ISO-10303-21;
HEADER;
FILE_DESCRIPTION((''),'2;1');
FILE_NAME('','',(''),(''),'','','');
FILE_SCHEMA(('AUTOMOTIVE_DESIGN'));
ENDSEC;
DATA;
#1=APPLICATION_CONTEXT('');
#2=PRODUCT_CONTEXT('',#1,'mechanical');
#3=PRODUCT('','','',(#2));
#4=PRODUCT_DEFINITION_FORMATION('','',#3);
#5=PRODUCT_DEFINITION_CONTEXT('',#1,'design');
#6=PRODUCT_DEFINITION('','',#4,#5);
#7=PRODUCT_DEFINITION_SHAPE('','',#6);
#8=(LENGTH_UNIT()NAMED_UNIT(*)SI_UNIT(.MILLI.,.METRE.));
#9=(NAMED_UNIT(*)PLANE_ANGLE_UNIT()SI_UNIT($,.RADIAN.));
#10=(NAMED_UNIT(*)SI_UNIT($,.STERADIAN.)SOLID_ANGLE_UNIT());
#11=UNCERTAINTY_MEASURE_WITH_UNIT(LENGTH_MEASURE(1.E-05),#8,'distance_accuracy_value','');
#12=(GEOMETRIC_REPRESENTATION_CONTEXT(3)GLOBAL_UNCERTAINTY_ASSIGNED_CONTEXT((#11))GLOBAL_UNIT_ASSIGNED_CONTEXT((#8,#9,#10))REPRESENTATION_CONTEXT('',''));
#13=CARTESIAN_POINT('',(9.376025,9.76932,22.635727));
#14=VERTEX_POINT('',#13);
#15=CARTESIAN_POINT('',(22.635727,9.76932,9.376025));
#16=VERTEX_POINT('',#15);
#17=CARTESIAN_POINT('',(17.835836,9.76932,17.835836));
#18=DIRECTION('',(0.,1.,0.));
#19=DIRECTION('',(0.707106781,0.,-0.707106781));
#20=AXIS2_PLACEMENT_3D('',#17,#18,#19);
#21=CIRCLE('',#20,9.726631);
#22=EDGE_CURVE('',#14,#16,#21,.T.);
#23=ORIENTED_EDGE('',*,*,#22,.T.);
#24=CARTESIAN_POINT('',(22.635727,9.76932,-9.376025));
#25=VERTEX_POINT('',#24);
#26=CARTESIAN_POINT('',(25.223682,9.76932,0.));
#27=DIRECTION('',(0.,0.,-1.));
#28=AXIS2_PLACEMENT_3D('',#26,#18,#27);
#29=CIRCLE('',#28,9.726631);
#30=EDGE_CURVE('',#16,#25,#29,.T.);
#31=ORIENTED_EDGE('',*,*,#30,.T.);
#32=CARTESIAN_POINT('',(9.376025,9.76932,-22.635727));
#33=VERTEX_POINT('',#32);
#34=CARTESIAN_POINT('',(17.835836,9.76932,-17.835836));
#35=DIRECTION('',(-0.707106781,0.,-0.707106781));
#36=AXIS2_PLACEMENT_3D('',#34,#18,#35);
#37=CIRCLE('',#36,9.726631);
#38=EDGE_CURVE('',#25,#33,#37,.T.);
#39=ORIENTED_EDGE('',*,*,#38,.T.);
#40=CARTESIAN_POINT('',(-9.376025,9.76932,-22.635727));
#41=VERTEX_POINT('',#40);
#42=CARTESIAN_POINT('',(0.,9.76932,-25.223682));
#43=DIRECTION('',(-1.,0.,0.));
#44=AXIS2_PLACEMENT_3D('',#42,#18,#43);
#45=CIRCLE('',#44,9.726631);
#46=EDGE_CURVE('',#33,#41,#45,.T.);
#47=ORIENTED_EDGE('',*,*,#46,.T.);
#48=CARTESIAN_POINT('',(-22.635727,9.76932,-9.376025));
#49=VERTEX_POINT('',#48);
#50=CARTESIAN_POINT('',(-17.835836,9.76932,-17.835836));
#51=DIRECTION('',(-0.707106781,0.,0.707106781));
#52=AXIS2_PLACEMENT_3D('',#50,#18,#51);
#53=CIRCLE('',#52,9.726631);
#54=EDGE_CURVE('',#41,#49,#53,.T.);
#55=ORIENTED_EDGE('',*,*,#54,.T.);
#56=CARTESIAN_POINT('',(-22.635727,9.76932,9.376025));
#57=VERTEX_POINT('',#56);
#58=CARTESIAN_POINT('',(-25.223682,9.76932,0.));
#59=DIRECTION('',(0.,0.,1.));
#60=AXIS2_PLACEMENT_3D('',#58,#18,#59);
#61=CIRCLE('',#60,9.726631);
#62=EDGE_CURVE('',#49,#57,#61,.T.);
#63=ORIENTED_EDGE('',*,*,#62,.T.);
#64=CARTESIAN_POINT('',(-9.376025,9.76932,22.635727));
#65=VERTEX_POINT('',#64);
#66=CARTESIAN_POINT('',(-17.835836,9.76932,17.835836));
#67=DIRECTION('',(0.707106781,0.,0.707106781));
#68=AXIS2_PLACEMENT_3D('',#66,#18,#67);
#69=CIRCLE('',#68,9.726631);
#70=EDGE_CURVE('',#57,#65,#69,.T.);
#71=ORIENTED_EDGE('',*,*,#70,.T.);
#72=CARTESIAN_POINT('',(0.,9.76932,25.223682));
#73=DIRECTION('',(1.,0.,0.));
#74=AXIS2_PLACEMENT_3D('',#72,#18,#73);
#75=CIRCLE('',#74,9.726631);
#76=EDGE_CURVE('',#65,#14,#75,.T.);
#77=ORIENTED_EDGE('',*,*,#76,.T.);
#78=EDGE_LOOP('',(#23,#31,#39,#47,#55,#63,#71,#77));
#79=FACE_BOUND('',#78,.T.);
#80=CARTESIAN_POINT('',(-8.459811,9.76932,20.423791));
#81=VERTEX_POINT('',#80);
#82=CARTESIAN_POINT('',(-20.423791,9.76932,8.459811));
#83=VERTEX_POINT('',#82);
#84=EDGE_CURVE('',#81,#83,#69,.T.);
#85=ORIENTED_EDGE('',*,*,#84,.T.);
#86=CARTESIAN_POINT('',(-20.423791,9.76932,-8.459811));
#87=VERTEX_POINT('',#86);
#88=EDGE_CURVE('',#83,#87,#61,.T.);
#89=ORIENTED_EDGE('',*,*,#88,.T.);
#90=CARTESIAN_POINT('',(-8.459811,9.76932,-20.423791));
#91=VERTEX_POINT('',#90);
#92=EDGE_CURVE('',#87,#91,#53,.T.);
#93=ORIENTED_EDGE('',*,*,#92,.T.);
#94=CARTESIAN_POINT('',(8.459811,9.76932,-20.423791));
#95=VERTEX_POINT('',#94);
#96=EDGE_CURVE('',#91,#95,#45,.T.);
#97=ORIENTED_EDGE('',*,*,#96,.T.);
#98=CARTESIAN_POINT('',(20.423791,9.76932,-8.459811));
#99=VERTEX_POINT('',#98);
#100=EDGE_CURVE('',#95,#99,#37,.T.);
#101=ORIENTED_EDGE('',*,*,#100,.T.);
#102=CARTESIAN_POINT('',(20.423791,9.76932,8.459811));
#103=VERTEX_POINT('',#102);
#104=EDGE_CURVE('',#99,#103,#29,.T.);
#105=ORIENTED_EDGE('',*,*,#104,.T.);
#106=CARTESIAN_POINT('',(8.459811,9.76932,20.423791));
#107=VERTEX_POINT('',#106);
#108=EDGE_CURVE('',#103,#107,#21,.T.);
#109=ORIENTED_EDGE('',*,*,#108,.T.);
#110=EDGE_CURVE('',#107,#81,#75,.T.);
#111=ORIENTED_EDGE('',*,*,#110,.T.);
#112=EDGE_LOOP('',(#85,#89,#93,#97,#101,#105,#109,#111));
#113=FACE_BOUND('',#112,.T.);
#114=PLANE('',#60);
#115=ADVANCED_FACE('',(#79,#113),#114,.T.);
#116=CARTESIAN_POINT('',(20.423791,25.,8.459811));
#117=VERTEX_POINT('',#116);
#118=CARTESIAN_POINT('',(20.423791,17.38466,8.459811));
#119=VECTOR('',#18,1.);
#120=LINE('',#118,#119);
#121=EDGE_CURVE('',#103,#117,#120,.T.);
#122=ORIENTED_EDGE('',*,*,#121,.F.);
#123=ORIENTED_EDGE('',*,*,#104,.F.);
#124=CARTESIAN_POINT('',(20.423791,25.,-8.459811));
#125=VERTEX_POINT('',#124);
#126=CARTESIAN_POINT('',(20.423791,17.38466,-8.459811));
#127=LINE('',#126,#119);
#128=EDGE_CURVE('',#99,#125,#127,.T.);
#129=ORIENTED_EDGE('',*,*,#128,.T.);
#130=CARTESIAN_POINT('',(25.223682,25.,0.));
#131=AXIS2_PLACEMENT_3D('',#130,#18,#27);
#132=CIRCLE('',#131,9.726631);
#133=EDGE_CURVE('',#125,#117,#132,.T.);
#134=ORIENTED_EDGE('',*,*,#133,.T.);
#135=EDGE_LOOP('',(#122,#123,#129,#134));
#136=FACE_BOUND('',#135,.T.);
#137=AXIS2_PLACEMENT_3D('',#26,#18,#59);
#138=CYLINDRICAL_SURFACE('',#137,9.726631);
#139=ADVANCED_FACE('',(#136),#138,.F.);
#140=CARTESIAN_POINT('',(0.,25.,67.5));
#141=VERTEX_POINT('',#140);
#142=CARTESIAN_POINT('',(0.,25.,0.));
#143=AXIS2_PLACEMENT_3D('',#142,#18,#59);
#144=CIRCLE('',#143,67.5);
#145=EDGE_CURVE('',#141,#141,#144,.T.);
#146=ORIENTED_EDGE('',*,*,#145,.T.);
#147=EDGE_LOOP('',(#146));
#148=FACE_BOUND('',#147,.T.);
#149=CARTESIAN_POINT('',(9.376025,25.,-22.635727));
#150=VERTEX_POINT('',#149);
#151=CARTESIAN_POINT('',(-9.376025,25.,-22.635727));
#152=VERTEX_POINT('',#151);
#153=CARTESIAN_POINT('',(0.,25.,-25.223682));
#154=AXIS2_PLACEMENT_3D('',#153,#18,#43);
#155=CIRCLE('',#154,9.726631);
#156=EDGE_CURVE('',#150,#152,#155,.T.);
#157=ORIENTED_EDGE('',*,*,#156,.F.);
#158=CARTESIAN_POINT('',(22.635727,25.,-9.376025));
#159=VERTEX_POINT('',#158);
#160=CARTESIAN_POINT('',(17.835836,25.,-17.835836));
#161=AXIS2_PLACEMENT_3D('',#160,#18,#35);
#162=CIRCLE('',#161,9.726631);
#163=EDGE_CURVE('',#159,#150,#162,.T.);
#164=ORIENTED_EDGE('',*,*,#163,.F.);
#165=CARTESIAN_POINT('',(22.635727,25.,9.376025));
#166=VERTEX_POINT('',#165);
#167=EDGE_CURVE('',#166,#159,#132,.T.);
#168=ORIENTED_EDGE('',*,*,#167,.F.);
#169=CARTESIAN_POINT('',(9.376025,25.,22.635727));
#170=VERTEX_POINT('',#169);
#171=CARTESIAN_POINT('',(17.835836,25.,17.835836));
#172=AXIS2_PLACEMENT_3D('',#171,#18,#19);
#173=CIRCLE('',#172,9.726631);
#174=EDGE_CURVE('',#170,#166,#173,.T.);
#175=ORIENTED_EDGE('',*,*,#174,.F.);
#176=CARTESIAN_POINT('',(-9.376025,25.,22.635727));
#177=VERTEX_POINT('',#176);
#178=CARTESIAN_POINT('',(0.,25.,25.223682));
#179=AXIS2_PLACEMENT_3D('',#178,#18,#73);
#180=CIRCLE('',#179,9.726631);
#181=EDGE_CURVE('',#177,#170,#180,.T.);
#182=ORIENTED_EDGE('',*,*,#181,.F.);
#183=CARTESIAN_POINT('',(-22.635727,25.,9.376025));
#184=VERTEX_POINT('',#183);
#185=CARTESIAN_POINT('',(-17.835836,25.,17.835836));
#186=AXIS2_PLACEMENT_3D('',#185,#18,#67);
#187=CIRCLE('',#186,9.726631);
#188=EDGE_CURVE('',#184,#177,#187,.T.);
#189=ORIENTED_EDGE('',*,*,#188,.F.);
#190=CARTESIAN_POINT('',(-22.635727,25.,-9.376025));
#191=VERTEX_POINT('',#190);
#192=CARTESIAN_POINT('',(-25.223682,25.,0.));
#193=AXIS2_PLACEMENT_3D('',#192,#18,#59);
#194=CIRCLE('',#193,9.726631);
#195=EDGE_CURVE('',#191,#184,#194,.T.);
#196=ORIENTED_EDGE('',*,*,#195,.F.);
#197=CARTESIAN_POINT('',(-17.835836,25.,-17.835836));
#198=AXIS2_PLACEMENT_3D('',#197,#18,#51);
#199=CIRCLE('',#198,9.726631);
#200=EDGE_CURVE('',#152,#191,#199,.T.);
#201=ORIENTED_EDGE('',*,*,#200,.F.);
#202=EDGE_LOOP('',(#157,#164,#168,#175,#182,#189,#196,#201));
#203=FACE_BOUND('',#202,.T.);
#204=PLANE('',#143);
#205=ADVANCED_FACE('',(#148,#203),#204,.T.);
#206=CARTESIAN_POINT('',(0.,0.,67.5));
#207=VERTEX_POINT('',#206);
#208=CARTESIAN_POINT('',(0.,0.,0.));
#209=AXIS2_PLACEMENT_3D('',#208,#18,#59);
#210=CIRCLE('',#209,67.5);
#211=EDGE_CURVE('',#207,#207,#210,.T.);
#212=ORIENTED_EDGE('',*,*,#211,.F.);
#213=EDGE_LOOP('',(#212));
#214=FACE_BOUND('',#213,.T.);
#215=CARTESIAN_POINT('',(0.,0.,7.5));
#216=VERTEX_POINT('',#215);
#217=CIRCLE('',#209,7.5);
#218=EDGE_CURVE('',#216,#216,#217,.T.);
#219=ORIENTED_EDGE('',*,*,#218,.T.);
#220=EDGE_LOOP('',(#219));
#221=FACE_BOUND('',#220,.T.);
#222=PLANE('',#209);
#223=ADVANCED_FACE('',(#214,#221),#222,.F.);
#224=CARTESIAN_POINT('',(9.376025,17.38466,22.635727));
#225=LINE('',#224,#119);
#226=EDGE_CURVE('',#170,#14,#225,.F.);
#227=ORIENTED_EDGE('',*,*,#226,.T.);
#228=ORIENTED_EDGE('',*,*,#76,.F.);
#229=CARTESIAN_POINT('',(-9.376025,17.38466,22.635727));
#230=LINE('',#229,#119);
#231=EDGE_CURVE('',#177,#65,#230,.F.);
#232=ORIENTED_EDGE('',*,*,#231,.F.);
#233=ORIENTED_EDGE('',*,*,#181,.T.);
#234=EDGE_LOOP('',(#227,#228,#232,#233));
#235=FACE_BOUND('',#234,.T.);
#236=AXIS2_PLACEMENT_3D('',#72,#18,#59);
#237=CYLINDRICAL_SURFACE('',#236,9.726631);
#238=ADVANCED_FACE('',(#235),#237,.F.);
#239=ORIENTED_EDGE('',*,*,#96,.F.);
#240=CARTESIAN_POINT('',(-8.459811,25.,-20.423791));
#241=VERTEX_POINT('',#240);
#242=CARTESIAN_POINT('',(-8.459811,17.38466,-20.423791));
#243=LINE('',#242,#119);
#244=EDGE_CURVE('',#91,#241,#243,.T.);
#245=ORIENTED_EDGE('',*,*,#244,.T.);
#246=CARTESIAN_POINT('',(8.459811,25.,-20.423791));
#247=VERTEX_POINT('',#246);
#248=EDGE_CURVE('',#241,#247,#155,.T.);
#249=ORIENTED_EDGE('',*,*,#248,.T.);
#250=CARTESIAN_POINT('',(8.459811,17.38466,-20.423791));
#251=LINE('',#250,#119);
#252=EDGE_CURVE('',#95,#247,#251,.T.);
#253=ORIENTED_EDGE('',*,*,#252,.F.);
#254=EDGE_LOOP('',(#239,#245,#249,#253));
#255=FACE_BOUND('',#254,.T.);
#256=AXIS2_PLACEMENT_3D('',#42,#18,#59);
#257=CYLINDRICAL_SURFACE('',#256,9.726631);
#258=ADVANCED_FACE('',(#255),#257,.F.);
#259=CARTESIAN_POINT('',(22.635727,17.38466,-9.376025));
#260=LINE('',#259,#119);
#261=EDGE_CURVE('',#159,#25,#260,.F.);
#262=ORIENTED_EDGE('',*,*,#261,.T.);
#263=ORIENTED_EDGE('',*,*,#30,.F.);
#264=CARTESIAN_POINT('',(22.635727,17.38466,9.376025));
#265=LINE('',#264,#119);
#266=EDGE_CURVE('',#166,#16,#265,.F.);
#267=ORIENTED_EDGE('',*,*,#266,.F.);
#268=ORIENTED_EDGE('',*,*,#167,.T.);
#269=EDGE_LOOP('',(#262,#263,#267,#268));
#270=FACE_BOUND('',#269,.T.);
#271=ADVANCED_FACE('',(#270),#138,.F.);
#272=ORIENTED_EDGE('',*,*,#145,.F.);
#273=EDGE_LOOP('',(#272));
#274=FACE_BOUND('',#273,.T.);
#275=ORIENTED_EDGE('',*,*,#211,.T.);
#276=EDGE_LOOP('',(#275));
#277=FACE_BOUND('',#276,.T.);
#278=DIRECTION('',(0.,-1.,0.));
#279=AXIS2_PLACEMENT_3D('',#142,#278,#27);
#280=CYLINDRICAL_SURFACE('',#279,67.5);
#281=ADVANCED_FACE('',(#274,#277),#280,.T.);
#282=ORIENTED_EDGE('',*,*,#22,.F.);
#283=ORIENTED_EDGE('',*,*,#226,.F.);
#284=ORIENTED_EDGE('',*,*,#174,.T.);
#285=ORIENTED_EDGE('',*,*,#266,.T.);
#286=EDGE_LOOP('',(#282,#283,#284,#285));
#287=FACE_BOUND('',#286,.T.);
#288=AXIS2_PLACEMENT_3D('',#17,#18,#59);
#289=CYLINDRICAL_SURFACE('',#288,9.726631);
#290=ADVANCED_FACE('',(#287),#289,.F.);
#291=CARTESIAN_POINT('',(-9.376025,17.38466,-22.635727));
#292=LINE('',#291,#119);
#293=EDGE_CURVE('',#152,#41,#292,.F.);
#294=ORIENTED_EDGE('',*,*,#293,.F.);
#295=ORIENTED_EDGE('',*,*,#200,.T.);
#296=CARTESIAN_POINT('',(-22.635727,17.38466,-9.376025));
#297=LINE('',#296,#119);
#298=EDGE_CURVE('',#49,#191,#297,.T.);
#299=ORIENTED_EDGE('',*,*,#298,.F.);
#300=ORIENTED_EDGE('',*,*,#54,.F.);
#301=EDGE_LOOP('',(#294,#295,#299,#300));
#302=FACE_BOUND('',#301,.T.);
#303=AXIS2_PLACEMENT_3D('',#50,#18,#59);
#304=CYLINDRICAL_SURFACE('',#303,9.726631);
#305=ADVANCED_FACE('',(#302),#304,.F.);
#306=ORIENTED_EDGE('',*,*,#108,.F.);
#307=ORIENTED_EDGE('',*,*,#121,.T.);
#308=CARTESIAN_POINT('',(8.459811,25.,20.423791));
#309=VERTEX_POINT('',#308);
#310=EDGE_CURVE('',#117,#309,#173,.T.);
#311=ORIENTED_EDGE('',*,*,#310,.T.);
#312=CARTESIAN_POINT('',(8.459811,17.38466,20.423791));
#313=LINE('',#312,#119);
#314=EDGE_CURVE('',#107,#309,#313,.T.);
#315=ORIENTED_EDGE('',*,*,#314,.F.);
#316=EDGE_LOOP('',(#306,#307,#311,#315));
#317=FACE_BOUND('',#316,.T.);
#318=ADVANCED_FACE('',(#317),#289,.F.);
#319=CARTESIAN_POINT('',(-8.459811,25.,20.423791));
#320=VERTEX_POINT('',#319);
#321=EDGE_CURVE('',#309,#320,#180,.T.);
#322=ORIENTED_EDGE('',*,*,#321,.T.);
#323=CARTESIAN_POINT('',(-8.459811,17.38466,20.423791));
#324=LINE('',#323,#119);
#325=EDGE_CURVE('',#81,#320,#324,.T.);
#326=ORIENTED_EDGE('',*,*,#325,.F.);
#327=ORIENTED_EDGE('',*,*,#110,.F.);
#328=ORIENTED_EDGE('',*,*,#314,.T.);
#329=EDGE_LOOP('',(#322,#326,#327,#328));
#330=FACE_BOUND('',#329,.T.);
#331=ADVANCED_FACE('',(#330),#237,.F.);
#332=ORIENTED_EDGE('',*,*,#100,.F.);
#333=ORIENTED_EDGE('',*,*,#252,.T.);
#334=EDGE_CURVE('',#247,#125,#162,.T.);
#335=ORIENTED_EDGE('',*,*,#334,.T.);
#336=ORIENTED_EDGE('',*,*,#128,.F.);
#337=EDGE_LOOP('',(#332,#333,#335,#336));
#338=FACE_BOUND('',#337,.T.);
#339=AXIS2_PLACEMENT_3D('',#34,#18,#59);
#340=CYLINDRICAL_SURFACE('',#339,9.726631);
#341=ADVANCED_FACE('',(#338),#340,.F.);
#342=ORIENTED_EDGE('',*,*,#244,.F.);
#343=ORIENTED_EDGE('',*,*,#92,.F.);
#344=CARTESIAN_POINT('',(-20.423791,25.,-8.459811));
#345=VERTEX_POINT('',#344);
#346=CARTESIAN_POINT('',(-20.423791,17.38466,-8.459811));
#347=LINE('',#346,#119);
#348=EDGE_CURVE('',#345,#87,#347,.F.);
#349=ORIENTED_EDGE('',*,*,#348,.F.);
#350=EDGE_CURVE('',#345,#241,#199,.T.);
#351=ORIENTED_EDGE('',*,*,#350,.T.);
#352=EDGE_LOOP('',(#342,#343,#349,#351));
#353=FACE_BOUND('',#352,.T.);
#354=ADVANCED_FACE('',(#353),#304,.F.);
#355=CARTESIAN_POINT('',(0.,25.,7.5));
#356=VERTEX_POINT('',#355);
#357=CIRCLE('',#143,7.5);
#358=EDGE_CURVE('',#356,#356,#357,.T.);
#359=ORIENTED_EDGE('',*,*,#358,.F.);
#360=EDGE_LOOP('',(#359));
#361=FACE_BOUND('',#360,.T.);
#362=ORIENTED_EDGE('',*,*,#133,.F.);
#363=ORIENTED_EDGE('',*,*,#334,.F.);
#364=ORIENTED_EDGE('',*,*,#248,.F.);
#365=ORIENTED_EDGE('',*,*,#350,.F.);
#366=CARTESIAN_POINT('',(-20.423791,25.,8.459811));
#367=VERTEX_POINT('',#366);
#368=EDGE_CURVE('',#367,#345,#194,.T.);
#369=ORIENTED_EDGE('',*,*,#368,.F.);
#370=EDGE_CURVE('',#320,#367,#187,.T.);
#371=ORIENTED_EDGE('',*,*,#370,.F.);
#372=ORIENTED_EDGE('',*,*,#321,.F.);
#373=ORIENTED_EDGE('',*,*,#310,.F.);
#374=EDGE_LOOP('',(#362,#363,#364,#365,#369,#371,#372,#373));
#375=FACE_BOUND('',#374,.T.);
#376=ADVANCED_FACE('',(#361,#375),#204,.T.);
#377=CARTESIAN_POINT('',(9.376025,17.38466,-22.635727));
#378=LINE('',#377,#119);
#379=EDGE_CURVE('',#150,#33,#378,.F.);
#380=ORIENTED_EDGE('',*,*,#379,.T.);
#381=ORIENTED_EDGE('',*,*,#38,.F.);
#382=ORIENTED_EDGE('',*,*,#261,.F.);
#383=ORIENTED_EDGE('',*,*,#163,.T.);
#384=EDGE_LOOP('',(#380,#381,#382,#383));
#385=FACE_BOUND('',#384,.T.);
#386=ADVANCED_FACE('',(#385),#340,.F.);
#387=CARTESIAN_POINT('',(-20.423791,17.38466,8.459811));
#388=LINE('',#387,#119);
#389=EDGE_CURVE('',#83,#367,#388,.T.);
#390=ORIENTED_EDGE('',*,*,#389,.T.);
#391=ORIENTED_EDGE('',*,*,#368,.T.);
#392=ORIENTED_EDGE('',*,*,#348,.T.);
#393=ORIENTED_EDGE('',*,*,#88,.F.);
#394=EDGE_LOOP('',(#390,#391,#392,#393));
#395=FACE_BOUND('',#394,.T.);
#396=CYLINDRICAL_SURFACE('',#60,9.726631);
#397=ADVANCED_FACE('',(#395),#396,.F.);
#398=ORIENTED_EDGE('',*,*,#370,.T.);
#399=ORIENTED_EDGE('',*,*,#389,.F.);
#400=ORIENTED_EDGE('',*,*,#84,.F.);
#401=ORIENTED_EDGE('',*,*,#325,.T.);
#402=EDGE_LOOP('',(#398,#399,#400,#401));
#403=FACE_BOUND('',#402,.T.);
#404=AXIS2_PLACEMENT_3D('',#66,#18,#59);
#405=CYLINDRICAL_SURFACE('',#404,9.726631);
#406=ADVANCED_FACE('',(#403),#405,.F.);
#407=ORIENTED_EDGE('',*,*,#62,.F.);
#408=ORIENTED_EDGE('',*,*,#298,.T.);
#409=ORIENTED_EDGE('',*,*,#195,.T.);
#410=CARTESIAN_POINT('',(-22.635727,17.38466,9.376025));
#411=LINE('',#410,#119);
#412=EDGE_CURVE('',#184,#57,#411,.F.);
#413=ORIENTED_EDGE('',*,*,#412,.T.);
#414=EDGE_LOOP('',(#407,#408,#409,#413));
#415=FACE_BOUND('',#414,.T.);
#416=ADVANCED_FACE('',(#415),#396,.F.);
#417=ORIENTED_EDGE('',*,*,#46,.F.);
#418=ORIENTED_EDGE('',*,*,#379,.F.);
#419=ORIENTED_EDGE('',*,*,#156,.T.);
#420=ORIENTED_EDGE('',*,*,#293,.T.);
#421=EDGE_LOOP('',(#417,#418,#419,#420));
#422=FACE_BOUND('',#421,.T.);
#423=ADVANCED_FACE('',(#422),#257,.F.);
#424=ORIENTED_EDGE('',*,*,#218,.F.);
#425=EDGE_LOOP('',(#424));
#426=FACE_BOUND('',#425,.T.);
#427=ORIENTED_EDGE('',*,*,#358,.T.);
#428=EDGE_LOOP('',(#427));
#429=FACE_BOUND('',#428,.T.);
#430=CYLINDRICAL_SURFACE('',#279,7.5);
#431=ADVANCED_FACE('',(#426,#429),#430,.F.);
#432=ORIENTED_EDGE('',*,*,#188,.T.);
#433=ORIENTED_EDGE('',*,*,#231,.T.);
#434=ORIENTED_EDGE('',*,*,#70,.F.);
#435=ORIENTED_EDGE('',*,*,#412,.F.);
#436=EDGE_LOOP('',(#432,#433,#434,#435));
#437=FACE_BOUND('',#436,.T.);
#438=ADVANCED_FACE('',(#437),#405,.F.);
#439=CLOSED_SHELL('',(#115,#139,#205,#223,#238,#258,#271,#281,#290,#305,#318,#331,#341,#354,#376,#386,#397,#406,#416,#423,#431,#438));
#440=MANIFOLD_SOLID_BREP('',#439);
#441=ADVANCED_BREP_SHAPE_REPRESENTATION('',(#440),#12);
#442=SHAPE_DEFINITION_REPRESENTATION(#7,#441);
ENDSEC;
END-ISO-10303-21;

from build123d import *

# Parameters (mm, degrees)
SKETCH1_R           = 67.5
BOSS_EXTRUDE1_DEPTH = 25
SKETCH2_R           = 7.5
CUT_EXTRUDE1_DEPTH  = 99.67877178
SKETCH3_R           = 9.726631354
CUT_EXTRUDE2_DEPTH  = 15.23068031
CIRPATTERN1_COUNT   = 8


with BuildPart() as part:
    # Sketch1 → Boss-Extrude1 (new body)
    with BuildSketch(Plane(origin=(0, 0, 0), x_dir=(1, 0, 0), z_dir=(0, 1, 0))):
        Circle(SKETCH1_R)
    extrude(amount=BOSS_EXTRUDE1_DEPTH)

    # Sketch2 → Cut-Extrude1 (cut, through all)
    with BuildSketch(Plane(origin=(0, 0, 0), x_dir=(1, 0, 0), z_dir=(0, 1, 0))):
        Circle(SKETCH2_R)
    extrude(amount=CUT_EXTRUDE1_DEPTH, mode=Mode.SUBTRACT)

    # Sketch3 → Cut-Extrude2 (cut)
    with BuildSketch(Plane(origin=(0, 25, 0), x_dir=(1, 0, 0), z_dir=(0, 1, 0))):
        with Locations((-25.223681721, 0)):
            Circle(SKETCH3_R)
    cut_extrude2 = extrude(amount=-CUT_EXTRUDE2_DEPTH, mode=Mode.SUBTRACT)

    # CirPattern1: Cut-Extrude2 ×8 about axis
    cirpattern1_axis = Axis((0, 0, 0), (0, 1, 0))
    for i in range(1, CIRPATTERN1_COUNT):
        add(cut_extrude2.rotate(cirpattern1_axis, i * 360 / CIRPATTERN1_COUNT), mode=Mode.SUBTRACT)


solid = part.part
